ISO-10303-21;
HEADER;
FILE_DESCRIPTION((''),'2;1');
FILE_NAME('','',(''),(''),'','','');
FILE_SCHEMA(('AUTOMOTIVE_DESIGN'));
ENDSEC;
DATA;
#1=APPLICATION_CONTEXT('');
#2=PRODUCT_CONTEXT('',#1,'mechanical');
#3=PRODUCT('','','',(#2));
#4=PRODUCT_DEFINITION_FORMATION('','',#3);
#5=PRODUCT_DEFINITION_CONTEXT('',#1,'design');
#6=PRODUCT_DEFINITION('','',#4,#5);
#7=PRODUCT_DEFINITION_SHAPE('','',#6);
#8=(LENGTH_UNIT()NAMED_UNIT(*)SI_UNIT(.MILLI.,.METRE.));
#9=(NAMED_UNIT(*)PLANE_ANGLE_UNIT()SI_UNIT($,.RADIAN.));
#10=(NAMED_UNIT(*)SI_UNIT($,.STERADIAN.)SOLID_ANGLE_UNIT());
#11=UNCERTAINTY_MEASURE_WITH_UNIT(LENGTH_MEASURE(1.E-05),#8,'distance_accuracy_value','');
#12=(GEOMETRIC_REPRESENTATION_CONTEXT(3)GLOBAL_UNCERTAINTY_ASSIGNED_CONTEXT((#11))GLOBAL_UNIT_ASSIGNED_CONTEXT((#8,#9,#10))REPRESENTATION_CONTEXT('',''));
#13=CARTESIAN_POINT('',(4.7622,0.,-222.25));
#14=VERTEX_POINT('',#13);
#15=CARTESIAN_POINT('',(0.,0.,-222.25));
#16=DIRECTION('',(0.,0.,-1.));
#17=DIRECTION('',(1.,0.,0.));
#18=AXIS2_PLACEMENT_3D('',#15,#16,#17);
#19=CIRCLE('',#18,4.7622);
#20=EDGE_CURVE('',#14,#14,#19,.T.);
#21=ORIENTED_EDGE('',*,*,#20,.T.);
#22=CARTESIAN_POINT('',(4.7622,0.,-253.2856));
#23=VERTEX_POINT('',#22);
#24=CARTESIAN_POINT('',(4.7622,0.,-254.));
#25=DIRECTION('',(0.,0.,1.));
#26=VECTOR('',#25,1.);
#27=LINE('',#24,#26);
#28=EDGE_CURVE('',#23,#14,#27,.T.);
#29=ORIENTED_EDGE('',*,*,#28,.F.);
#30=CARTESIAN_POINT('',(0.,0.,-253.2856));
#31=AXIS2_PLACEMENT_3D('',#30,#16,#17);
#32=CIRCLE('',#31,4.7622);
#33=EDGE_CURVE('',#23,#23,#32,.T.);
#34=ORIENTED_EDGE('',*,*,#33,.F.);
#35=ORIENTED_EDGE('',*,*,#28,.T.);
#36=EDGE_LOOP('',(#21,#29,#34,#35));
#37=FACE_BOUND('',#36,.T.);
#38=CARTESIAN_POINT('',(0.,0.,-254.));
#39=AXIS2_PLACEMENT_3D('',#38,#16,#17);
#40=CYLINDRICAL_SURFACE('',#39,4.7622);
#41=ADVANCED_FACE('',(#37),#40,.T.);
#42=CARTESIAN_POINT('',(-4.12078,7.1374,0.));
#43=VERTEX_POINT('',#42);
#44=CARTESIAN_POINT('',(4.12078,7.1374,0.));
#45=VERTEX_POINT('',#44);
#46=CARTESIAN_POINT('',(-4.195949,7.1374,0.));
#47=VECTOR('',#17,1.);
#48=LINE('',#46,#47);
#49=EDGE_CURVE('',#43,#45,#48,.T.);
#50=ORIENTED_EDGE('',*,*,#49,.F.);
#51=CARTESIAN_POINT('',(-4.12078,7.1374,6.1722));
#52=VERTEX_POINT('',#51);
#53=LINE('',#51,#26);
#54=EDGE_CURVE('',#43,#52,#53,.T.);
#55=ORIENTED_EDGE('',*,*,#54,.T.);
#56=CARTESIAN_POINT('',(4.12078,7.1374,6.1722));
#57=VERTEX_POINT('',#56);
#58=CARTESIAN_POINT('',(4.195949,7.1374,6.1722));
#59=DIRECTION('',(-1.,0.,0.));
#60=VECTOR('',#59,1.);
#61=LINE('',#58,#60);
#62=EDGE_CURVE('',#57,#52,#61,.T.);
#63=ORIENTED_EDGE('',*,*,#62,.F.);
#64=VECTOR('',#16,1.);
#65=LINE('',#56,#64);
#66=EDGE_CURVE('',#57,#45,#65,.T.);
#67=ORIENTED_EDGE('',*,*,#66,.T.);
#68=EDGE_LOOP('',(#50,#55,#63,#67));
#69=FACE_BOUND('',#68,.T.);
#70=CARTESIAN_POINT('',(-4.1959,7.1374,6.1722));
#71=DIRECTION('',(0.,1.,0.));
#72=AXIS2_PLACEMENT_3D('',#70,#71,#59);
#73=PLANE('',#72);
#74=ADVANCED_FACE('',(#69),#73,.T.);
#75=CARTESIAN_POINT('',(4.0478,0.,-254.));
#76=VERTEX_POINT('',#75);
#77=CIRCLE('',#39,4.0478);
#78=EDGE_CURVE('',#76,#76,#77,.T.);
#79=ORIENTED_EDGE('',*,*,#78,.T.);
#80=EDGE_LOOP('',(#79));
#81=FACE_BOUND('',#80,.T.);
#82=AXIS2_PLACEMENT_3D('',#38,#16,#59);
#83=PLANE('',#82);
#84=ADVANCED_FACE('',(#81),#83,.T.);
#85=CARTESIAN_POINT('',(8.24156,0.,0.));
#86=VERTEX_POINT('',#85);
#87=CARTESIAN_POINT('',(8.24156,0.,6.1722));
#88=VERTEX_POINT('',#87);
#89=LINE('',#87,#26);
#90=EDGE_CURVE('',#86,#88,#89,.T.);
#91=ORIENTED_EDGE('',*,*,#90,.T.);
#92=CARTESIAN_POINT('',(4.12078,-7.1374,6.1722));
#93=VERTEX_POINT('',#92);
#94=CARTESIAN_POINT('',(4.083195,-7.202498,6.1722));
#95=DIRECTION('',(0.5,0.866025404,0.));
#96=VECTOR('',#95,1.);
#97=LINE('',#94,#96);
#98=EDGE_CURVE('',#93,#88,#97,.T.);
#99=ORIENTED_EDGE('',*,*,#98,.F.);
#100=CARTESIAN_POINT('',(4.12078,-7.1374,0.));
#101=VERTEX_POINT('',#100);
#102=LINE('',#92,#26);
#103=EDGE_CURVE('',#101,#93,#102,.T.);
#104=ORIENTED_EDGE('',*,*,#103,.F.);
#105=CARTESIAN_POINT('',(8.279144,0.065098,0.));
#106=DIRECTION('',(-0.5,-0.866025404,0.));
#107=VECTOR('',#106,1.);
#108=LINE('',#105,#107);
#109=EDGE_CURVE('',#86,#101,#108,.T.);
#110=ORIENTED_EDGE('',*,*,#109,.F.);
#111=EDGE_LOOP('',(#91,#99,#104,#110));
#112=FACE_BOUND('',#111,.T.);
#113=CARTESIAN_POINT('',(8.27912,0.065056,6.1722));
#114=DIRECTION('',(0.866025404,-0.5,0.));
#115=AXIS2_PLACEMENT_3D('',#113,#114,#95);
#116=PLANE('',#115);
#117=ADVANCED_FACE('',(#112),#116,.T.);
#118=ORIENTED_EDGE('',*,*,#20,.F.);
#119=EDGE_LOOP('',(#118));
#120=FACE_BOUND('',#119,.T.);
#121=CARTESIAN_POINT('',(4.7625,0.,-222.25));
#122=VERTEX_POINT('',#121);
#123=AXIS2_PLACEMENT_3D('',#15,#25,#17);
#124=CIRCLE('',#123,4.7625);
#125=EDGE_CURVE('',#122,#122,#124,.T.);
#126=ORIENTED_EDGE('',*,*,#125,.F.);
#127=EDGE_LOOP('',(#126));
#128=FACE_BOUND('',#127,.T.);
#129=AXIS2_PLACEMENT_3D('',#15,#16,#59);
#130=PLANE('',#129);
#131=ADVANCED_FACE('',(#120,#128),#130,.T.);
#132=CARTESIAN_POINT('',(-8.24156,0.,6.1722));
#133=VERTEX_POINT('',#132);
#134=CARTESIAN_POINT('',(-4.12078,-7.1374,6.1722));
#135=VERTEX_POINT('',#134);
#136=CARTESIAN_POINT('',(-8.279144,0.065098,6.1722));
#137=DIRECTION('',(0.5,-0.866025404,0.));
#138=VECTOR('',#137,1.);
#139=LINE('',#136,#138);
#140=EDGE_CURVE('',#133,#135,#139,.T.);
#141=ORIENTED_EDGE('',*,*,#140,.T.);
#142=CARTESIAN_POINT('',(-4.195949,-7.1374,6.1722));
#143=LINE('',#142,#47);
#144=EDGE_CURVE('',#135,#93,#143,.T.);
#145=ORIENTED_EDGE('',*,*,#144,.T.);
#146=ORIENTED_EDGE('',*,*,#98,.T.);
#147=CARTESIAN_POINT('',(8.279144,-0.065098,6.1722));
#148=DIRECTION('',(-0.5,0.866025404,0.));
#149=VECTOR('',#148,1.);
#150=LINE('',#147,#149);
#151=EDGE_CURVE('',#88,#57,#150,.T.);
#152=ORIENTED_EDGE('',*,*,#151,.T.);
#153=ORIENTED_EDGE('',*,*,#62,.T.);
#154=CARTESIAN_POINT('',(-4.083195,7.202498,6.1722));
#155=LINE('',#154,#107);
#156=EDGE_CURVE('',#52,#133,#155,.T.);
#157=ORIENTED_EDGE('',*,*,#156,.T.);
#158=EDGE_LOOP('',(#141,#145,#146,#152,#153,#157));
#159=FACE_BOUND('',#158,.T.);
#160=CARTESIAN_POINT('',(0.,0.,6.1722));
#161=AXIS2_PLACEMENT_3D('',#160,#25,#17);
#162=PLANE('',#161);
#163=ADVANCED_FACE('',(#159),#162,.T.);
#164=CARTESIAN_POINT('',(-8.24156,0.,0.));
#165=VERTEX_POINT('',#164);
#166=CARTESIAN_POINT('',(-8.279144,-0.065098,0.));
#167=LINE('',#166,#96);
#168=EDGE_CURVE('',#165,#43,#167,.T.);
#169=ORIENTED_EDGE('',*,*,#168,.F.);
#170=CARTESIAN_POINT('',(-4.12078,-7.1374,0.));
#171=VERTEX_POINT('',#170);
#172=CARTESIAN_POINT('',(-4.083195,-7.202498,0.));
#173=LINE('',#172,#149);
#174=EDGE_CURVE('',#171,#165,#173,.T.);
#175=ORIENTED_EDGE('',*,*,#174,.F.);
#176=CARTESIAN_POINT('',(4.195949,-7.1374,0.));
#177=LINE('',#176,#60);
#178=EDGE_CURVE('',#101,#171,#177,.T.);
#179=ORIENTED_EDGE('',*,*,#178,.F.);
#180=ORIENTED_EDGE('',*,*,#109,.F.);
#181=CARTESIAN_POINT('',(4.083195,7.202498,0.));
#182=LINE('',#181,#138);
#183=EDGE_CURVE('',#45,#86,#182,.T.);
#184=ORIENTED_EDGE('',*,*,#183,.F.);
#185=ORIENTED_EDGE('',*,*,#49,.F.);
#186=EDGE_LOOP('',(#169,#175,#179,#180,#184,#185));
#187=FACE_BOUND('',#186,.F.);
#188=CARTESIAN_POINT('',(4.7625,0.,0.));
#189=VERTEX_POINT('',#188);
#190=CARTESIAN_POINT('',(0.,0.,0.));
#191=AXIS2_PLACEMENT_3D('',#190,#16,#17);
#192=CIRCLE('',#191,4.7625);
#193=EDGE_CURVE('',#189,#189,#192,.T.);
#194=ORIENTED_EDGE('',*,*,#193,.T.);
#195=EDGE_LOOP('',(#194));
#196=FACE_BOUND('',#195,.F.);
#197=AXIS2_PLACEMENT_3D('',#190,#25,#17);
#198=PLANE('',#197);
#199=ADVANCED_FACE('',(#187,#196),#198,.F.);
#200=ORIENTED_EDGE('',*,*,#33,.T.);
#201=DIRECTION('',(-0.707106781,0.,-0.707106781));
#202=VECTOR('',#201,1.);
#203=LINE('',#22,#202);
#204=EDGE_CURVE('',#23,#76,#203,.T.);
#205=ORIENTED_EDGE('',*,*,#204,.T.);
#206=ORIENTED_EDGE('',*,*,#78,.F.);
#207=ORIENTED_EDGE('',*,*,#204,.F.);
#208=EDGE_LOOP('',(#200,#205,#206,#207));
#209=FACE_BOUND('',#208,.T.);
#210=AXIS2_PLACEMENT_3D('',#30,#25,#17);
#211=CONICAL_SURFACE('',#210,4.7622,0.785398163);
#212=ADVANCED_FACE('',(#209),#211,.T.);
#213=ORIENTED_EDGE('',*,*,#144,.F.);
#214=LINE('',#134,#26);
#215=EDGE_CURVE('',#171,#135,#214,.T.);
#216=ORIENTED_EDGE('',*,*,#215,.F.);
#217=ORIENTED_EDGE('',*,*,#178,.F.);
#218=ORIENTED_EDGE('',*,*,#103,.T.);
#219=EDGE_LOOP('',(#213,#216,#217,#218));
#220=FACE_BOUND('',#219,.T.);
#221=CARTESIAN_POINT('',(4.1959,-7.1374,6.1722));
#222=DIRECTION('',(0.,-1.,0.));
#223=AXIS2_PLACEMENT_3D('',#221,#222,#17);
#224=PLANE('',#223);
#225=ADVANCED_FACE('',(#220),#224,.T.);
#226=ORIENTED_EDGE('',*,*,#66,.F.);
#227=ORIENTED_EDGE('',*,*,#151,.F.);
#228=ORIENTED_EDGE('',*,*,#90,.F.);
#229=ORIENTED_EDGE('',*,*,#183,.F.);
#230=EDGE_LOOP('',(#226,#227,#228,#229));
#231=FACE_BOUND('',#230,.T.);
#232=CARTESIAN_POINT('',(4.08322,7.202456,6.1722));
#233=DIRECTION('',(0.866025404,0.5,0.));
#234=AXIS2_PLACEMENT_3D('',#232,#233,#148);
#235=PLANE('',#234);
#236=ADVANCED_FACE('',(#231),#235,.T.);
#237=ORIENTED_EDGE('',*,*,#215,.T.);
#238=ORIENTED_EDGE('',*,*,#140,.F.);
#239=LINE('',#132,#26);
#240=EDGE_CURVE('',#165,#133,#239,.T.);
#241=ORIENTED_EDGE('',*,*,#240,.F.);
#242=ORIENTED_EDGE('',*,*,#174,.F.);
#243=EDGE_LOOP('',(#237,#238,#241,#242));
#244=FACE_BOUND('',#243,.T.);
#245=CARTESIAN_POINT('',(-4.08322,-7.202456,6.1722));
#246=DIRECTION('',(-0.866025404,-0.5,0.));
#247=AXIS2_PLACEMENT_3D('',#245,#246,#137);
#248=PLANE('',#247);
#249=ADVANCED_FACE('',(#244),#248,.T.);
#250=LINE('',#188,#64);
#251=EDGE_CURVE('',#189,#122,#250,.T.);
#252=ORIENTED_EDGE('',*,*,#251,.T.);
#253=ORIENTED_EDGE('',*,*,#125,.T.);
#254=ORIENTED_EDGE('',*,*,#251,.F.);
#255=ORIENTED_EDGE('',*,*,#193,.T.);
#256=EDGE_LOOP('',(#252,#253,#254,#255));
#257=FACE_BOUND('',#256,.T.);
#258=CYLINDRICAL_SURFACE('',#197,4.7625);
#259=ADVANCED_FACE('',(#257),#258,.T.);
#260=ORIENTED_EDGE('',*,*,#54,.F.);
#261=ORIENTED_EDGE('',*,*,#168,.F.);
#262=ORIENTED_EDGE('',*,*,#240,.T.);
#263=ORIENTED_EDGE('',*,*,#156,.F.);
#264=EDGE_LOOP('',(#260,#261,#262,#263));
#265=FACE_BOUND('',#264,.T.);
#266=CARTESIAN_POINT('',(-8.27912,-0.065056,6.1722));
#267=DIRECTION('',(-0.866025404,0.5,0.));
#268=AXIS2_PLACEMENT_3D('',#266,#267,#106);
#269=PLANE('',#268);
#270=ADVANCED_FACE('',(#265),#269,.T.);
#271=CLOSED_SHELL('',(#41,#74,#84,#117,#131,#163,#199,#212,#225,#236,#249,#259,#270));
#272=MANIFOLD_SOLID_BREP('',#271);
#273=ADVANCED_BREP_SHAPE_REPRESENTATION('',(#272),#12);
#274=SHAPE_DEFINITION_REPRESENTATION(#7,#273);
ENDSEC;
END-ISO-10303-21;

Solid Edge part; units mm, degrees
sketch "Sketch1" plane through (0, 0, 0) normal (0, 0, 1) x (1, 0, 0)
  circle A0 centre (0, 0) radius 8.2794
  dimension "D1" = 16.5588
extrude "Protrusion1" add sketch "Sketch1" along normal blind 6.1722
sketch "Sketch2" plane through (0, 0, 0) normal (0, 0, -1) x (1, 0, 0)
  circle A0 centre (0, 0) radius 4.7625
extrude "Protrusion2" add sketch "Sketch2" along normal blind 254
sketch "Sketch3" plane through (0, 0, -254) normal (0, 0, -1) x (1, 0, 0)
  circle A0 centre (0, 0) radius 4.7622
extrude "Cutout1" cut sketch "Sketch3" against normal blind 31.75 flip side to cut
chamfer "Chamfer_1" distance 0.7144 angle 45 1 edges at (-4.7622, 0, -254)
sketch "Sketch4" plane through (0, 0, 6.1722) normal (0, 0, 1) x (1, 0, 0)
  line L0 (-4.1959, 7.1374) -> (4.1959, 7.1374)
  dimension "D1" = 14.2748
extrude "Cutout2" cut sketch "Sketch4" against normal up to next material side at (0, 7.1874, 6.1722)
pattern_circular "Pattern1" count 6 over 360 about axis through (0, 0, 6.1722) along (0, 0, 1) of "Cutout2"
properties part number "24102579"
